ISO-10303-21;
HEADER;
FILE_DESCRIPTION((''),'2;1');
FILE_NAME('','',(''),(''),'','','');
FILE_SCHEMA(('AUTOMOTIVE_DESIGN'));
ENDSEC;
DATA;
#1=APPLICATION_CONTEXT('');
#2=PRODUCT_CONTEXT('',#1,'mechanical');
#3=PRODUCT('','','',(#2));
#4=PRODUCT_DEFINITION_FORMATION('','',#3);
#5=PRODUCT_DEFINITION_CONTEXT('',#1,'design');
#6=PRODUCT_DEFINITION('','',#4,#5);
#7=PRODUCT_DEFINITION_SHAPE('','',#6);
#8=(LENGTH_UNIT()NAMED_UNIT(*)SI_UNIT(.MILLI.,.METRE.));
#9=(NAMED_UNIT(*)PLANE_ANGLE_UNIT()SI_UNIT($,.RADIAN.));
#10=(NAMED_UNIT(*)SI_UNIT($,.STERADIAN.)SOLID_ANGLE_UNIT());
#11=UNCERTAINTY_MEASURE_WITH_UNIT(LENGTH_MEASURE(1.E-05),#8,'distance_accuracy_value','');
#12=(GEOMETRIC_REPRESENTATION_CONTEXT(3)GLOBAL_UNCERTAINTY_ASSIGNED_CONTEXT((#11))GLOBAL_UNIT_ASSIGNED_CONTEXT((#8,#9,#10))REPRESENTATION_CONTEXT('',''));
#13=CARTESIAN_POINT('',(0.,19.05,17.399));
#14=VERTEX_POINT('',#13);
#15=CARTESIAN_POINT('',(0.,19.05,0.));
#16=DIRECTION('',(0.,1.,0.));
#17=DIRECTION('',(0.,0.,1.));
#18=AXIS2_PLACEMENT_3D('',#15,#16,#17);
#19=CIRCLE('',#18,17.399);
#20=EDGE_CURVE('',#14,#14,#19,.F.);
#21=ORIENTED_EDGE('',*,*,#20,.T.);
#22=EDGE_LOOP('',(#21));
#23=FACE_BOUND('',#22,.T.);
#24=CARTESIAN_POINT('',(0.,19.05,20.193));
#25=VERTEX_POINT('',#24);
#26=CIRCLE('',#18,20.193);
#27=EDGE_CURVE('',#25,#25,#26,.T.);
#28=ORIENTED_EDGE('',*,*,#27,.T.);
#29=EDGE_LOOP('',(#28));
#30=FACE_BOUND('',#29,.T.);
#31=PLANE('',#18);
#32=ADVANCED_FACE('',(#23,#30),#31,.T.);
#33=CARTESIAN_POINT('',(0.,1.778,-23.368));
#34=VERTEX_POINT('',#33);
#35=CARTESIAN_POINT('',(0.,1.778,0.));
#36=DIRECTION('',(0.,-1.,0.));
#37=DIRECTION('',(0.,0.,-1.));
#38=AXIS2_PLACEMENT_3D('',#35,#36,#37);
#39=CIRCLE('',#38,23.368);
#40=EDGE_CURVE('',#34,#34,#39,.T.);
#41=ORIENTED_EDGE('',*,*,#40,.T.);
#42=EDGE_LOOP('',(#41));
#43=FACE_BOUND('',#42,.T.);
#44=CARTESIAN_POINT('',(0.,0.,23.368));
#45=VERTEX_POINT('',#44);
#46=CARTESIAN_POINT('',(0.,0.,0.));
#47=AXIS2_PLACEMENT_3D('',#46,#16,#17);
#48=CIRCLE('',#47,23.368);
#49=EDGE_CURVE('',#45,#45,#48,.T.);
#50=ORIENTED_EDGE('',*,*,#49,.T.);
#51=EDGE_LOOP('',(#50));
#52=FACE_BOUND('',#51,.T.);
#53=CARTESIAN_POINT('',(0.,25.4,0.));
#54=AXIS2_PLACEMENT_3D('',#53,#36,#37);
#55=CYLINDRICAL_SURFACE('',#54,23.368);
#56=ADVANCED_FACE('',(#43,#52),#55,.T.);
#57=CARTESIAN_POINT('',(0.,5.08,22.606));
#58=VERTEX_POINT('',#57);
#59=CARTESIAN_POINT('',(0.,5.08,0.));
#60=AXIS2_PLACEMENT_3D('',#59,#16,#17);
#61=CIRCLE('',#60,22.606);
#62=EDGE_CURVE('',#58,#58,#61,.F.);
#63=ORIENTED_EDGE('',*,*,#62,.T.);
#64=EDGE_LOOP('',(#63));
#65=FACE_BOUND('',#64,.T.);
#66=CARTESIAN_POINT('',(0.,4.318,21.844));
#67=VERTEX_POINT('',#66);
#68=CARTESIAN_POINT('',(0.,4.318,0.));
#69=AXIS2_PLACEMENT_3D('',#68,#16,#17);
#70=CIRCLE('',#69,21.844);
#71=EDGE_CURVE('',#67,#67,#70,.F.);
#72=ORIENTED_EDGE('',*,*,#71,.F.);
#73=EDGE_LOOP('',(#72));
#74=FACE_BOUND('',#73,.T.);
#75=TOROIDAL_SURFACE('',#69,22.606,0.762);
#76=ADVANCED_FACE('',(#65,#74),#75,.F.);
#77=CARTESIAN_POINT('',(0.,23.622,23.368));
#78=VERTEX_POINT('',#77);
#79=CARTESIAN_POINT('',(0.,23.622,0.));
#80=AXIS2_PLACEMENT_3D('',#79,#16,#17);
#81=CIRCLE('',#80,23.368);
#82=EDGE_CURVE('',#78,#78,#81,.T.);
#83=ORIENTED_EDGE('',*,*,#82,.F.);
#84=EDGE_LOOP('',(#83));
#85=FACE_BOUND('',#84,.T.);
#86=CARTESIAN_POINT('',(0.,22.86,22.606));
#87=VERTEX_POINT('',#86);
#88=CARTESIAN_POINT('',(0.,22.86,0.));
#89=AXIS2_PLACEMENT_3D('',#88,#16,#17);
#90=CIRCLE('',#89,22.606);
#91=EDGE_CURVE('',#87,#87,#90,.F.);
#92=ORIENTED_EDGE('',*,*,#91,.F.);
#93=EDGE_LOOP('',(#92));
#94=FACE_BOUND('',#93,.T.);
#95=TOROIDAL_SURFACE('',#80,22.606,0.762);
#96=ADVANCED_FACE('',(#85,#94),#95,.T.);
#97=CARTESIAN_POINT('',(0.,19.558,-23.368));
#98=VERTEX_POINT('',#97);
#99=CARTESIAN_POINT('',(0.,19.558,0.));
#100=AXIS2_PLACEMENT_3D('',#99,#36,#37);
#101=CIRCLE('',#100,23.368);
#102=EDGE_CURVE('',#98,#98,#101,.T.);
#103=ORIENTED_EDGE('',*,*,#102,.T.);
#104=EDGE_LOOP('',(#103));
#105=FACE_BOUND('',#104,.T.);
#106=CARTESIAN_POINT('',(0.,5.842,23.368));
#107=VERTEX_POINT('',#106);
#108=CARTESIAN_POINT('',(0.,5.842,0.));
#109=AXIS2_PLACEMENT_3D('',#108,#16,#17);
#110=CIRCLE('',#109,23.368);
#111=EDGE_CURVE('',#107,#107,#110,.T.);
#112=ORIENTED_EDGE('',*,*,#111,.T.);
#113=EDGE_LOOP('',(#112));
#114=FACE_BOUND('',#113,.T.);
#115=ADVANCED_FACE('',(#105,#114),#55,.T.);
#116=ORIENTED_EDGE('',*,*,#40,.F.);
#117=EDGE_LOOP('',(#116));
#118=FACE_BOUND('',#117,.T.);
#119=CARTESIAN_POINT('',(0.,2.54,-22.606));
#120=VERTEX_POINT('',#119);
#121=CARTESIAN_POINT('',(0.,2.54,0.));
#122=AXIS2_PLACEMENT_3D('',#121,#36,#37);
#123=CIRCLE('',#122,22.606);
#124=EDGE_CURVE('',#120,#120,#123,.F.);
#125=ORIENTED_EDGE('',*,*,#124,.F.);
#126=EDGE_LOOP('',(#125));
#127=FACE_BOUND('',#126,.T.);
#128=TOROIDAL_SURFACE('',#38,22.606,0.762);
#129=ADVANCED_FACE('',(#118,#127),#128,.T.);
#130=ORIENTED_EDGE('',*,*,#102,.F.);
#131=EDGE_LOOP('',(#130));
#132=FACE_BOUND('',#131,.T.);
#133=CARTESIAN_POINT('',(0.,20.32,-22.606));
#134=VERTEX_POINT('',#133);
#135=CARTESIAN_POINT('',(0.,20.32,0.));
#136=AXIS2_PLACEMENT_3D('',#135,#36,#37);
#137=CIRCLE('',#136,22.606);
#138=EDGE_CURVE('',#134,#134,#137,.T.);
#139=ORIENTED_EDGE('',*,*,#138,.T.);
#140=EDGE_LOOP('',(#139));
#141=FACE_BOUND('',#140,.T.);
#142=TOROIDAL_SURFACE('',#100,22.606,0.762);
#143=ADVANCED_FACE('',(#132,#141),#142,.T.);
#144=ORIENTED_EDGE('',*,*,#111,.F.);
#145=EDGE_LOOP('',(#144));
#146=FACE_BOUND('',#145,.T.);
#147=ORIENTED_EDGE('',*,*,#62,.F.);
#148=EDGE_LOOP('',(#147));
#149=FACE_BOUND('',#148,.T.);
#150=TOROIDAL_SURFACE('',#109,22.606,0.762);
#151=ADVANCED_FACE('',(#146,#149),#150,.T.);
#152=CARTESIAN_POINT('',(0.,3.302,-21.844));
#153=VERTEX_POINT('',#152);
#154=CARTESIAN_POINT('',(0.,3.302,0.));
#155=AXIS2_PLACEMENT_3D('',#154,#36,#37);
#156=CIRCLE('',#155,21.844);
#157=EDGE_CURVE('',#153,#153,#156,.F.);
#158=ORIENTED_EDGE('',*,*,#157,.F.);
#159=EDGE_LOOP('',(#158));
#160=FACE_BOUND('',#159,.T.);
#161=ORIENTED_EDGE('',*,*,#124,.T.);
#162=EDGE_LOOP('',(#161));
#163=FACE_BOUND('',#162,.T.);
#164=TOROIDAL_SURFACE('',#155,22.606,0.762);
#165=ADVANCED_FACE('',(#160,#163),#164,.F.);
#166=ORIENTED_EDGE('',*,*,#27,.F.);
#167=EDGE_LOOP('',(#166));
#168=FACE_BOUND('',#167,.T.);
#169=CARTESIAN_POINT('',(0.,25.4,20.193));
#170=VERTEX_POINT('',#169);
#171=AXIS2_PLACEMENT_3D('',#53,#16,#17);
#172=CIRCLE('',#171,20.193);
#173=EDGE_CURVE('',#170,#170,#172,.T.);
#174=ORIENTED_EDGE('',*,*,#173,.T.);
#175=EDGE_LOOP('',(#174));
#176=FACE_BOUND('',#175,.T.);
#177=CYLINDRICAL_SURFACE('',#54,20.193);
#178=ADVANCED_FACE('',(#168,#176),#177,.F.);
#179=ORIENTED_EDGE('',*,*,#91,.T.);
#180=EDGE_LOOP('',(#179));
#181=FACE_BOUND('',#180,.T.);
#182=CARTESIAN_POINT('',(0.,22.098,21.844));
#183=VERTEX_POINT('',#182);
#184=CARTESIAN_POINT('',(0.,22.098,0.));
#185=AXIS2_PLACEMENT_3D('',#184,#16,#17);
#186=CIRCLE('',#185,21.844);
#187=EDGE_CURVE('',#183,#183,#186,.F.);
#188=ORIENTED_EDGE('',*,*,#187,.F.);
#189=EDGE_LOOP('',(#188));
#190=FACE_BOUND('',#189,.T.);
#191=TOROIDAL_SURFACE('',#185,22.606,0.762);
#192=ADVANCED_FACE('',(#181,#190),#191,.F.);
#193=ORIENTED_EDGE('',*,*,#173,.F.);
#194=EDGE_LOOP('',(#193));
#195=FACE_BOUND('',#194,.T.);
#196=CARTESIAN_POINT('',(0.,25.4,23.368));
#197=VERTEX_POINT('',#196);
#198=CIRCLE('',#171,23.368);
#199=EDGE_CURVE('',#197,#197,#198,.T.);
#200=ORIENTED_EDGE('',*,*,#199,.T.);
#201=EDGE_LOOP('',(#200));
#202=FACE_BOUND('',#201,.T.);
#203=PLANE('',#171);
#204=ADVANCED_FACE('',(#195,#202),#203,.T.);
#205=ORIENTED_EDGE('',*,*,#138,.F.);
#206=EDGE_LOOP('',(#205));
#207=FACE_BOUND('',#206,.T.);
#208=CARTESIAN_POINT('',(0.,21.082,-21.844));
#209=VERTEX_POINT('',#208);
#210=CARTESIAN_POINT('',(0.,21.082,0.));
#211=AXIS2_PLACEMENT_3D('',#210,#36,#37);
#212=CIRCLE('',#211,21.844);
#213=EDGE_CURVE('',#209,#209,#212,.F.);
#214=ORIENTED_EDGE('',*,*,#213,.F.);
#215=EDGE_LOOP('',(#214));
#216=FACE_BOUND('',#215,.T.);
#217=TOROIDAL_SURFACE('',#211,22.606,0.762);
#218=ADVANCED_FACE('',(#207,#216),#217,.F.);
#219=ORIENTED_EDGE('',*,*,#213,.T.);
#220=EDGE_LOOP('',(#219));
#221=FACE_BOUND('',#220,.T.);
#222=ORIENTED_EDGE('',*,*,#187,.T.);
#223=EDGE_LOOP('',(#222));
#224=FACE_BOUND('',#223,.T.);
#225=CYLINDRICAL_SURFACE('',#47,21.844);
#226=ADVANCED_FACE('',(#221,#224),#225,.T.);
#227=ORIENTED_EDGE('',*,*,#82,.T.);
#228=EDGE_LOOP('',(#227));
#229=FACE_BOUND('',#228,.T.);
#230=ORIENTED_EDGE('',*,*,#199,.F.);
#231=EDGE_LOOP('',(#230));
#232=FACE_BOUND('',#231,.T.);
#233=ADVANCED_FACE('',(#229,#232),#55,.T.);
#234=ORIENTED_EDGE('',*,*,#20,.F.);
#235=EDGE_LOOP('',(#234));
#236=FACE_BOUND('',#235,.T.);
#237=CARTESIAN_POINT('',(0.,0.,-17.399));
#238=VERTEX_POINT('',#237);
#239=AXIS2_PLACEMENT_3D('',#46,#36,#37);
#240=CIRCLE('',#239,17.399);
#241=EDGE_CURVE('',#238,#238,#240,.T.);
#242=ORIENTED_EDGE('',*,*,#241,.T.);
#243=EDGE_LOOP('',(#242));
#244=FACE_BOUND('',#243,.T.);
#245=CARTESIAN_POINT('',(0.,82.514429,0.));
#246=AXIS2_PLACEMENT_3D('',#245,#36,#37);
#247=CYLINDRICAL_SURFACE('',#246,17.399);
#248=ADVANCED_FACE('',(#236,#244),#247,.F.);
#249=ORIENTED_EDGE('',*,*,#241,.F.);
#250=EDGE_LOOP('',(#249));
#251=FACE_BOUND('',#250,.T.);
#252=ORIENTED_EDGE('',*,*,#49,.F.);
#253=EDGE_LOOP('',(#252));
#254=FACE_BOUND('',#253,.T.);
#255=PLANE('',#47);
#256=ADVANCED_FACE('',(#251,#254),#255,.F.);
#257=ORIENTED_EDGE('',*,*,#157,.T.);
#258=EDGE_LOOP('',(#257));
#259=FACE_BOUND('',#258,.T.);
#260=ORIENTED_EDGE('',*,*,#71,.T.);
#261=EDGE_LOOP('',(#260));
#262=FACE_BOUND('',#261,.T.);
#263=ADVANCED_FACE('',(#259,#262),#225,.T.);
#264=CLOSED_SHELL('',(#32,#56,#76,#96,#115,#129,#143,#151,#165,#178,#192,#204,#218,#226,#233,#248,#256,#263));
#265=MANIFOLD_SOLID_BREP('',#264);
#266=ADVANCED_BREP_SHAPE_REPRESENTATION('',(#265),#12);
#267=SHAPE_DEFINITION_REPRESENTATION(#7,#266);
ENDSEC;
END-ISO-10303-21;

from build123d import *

# Parameters (mm, degrees)
SKETCH2_R           = 23.368
SKETCH2_R_2         = 20.193
BOSS_EXTRUDE1_DEPTH = 25.4
SKETCH3_R           = 20.193
SKETCH3_R_2         = 17.399
BOSS_EXTRUDE2_DEPTH = 19.05
SKETCH4_W           = 1.524
SKETCH4_H           = 2.54
FILLET1_R           = 0.762


with BuildPart() as part:
    # Sketch2 → Boss-Extrude1 (new body)
    with BuildSketch(Plane(origin=(0, 0, 0), x_dir=(1, 0, 0), z_dir=(0, 1, 0))):
        with Locations(Location((0, 0, 0), (0, 0, 270))):
            Circle(SKETCH2_R)
        with Locations(Location((0, 0, 0), (0, 0, 270))):
            Circle(SKETCH2_R_2, mode=Mode.SUBTRACT)
    extrude(amount=BOSS_EXTRUDE1_DEPTH)

    # Sketch3 → Boss-Extrude2 (add)
    with BuildSketch(Plane.XZ):
        with Locations(Location((0, 0, 0), (0, 0, 90))):
            Circle(SKETCH3_R)
        with Locations(Location((0, 0, 0), (0, 0, 270))):
            Circle(SKETCH3_R_2, mode=Mode.SUBTRACT)
    extrude(amount=-BOSS_EXTRUDE2_DEPTH)

    # Sketch4 → Cut-Revolve1 (revolve, cut)
    with BuildSketch(Plane.XY, mode=Mode.PRIVATE) as cut_revolve1_sk:
        with Locations((-22.606, 3.81)):
            Rectangle(SKETCH4_W, SKETCH4_H)
        with Locations((-22.606, 21.59)):
            Rectangle(SKETCH4_W, SKETCH4_H)
    revolve(cut_revolve1_sk.sketch.rotate(Axis((0, 0, 0), (0, -1, 0)), 270), axis=Axis((0, 0, 0), (0, -1, 0)), mode=Mode.SUBTRACT)

    # Fillet1
    fillet1_edges = [part.edges().sort_by_distance(p)[0] for p in [
        (0, 20.32, -21.844),
        (0, 22.86, -21.844),
        (0, 22.86, -23.368),
        (0, 20.32, -23.368),
        (0, 2.54, -23.368),
        (0, 2.54, -21.844),
        (0, 5.08, -21.844),
        (0, 5.08, -23.368),
    ]]
    fillet(fillet1_edges, radius=FILLET1_R - 0.0001)  # a hair under: the kernel refuses the full size


solid = part.part
